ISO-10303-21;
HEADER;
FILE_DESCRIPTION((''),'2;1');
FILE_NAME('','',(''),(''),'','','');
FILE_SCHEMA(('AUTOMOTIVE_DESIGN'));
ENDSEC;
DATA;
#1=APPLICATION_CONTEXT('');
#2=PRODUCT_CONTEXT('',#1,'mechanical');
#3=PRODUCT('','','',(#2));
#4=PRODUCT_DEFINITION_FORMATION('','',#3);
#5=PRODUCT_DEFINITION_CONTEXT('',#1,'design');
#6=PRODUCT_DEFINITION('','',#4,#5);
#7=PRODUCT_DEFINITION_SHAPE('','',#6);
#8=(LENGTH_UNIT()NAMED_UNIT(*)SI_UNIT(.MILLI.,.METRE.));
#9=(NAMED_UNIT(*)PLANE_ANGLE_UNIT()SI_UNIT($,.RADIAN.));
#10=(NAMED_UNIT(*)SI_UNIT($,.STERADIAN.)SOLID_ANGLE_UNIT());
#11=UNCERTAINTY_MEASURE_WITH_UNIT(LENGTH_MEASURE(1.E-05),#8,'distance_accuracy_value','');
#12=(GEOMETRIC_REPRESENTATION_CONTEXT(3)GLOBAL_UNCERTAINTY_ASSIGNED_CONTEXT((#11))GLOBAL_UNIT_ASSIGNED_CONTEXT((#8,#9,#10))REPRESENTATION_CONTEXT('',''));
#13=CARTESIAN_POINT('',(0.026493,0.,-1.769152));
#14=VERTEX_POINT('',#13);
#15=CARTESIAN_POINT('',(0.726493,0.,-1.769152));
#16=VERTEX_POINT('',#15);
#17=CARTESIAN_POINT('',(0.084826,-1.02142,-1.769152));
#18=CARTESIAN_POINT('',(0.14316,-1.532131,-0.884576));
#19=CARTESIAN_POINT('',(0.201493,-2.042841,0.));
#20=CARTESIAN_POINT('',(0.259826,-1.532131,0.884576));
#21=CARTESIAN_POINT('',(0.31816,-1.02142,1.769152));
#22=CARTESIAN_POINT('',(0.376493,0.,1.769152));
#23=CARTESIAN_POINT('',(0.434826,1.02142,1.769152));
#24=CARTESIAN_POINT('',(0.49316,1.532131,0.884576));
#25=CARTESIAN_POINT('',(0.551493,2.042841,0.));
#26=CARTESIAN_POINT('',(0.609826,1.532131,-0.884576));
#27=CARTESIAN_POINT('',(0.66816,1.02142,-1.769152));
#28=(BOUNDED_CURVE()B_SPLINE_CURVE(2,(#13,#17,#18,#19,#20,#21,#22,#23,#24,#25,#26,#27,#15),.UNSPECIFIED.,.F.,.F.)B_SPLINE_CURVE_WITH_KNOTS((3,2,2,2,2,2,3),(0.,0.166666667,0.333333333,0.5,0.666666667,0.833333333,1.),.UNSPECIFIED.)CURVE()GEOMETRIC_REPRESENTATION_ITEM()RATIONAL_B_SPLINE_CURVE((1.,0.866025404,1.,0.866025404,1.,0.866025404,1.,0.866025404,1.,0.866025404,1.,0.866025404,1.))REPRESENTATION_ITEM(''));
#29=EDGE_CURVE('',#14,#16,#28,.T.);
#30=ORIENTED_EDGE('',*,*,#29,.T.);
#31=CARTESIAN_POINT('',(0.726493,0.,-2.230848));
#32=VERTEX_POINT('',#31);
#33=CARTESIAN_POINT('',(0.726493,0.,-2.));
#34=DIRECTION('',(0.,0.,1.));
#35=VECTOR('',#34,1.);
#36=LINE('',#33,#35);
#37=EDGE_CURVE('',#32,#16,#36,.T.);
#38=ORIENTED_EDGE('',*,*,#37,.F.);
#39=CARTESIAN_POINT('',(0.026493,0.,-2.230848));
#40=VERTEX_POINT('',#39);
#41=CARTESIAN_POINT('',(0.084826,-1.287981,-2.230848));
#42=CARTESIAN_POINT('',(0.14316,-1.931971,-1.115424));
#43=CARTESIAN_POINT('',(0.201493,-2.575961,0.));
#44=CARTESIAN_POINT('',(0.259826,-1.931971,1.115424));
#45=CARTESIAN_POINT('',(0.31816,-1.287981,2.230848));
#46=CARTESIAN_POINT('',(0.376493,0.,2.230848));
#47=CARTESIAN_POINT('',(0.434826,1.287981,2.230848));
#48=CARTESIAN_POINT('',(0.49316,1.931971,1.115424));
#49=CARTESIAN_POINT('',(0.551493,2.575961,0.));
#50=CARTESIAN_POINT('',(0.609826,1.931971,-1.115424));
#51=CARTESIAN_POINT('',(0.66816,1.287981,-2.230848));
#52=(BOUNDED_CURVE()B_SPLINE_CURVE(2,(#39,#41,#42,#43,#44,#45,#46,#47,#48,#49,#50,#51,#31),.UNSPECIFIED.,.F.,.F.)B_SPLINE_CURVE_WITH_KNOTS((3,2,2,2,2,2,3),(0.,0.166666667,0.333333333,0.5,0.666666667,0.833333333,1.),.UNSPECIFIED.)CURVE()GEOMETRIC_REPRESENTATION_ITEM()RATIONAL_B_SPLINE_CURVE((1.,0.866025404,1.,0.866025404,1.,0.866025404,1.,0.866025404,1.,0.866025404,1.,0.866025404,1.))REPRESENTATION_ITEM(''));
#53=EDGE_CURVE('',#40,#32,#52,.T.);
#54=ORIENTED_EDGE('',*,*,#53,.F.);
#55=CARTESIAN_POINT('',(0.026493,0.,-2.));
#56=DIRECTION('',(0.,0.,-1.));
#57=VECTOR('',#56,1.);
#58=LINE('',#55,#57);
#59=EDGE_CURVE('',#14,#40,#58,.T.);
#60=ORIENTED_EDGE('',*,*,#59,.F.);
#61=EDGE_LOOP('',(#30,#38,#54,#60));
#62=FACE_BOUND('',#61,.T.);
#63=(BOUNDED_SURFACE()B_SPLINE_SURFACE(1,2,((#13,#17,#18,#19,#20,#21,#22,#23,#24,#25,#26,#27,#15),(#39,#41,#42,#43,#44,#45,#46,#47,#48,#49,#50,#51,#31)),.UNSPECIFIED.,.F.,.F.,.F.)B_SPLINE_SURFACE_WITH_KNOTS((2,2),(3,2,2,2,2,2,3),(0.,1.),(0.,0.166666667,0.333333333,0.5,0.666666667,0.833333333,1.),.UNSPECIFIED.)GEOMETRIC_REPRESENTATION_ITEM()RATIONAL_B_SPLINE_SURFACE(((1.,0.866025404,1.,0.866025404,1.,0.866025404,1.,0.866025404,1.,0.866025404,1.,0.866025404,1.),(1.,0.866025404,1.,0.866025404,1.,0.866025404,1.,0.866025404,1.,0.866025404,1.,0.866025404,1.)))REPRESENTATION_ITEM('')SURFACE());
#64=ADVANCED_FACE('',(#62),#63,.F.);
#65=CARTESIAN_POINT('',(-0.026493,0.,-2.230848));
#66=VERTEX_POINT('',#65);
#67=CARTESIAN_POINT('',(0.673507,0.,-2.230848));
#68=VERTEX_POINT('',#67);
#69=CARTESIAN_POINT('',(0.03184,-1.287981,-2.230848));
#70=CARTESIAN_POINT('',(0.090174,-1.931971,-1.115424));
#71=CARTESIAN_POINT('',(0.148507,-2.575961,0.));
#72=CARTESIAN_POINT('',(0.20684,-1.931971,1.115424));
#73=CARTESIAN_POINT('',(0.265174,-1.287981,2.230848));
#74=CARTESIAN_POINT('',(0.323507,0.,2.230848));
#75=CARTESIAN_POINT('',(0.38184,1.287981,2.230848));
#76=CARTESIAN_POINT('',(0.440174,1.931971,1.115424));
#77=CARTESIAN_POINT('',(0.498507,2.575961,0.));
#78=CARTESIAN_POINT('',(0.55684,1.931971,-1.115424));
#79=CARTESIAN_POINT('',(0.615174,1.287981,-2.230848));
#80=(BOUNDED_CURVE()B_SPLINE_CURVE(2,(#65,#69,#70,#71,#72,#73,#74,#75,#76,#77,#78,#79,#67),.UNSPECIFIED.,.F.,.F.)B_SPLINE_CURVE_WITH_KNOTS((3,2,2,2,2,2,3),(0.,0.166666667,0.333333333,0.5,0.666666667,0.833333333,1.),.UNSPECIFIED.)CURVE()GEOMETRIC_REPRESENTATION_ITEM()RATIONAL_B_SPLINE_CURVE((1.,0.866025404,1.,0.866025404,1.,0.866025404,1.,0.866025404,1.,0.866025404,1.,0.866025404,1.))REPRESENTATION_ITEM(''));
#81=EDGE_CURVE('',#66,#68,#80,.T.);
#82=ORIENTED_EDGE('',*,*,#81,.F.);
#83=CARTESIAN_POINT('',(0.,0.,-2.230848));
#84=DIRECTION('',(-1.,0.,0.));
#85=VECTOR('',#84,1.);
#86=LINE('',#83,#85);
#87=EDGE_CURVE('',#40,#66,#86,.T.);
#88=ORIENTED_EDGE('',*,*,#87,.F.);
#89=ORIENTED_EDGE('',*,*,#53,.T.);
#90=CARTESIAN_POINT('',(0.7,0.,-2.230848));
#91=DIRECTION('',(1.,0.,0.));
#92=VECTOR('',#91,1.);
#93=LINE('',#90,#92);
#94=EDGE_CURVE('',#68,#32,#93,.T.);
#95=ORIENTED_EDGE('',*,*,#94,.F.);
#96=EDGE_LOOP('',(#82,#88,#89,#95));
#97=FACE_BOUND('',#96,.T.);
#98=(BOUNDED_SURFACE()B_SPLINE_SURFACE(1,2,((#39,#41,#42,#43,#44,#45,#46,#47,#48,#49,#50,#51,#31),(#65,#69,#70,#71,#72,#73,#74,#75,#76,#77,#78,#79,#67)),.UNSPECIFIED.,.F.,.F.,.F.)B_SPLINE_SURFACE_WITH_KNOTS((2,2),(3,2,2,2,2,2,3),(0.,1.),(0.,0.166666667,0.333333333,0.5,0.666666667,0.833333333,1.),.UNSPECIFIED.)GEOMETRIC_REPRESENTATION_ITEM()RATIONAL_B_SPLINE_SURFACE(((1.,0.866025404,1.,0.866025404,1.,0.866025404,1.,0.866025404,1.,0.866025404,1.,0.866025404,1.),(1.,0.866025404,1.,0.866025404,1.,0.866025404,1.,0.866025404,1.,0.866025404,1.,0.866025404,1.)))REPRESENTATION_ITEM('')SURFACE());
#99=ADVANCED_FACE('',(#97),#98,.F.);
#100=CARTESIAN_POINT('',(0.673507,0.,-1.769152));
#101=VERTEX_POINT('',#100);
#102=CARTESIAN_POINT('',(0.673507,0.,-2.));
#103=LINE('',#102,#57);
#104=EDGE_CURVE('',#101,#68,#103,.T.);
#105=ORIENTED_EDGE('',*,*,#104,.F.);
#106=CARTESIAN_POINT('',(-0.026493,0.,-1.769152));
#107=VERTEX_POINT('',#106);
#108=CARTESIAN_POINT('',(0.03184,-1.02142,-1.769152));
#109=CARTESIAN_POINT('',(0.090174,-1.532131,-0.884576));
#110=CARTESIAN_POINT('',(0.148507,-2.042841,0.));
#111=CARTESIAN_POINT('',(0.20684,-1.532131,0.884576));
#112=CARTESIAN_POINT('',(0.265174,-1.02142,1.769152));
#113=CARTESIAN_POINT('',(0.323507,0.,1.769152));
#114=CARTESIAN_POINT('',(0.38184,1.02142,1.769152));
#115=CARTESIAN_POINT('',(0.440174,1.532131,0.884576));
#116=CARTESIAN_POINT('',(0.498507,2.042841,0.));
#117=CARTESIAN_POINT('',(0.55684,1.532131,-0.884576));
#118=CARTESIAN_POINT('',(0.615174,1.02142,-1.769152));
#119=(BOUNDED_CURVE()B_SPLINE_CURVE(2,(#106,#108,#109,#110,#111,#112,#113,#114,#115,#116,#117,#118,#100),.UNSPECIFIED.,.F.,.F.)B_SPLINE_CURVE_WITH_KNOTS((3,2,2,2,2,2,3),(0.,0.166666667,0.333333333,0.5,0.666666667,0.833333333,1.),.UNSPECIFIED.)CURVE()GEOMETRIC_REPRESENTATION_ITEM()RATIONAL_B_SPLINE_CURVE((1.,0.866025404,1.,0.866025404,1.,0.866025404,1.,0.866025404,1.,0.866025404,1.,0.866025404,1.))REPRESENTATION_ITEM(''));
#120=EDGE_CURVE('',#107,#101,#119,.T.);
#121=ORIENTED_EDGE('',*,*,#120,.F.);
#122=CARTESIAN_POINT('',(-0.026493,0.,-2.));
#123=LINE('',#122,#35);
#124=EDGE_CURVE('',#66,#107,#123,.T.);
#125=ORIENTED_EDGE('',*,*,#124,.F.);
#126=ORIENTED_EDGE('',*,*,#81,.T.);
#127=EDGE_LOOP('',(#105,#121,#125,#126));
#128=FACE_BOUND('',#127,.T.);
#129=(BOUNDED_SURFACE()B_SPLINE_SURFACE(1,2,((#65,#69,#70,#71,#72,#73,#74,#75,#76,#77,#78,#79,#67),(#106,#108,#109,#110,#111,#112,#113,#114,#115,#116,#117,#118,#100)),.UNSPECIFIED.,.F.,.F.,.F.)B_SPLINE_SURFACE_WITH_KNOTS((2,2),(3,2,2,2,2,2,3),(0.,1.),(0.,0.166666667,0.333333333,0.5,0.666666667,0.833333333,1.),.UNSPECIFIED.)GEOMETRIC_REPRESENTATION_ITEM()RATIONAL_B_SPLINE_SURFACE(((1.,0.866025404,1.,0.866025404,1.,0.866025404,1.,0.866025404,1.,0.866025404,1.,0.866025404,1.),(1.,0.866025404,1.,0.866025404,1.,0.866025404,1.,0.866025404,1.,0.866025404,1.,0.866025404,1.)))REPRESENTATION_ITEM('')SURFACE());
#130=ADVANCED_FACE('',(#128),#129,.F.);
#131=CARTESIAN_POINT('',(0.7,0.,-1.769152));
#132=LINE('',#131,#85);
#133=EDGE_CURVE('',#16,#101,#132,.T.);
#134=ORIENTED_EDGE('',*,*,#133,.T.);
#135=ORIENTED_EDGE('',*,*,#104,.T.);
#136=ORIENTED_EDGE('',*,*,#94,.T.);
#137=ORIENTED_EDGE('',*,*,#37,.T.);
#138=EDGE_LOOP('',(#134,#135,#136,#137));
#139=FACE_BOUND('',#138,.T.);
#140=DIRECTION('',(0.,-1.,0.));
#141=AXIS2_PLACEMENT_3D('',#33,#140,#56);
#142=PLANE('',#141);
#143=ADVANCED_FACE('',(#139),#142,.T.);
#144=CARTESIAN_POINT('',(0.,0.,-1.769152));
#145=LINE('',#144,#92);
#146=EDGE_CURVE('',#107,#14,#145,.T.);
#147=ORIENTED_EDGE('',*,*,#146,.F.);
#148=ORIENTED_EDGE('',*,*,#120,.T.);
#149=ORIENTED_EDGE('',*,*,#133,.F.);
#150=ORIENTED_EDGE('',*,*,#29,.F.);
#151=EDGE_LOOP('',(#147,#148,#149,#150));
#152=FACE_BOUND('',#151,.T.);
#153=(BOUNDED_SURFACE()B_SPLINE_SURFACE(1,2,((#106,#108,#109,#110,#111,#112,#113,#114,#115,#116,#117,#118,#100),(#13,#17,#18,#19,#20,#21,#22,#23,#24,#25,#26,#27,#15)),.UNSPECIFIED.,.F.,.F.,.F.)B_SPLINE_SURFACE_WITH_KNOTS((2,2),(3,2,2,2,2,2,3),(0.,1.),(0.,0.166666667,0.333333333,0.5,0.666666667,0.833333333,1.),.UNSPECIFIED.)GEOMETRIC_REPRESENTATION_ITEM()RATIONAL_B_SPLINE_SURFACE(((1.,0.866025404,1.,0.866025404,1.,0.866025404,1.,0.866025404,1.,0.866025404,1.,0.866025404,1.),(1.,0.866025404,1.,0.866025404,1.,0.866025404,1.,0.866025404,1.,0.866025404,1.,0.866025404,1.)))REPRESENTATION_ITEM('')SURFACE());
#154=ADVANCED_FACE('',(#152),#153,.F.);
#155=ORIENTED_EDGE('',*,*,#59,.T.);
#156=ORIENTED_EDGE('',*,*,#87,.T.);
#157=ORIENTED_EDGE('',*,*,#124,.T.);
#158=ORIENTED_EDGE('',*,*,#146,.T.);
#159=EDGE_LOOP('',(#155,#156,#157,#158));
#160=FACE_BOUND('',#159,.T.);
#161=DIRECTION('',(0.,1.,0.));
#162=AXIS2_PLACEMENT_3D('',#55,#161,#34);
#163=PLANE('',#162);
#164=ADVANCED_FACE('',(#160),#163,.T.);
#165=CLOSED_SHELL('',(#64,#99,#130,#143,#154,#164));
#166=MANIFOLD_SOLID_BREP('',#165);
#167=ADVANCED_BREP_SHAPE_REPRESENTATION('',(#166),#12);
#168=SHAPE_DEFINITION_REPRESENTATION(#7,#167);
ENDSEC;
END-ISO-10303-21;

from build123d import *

# Parameters (mm, degrees)
SWEEP1_PITCH = 0.7


with BuildPart() as part:
    # Sweep1: the profile of Sketch4 screwed along a left-hand helix of 1 turns, 6 arcs to a turn; built about Z, then put on its axis
    sweep1_z = Axis((0, 0, 0), (0, 0, 1))
    sweep1_corners = [(1.769151995, 0, 0.026493031), (1.769151995, 0, -0.026493031), (2.230848005, 0, -0.026493031), (2.230848005, 0, 0.026493031)]
    with BuildLine(mode=Mode.PRIVATE) as sweep1_profile:
        Line(sweep1_corners[0], sweep1_corners[1])
        Line(sweep1_corners[1], sweep1_corners[2])
        Line(sweep1_corners[2], sweep1_corners[3])
        Line(sweep1_corners[3], sweep1_corners[0])
    sweep1_cap = Face(sweep1_profile.wire())
    sweep1_turn_angles = [0, -30, -60, -90, -120, -150, -180, -210, -240, -270, -300, -330, -360]
    sweep1_turn_weights = [1, 0.8660254037844387, 1, 0.8660254037844387, 1, 0.8660254037844387, 1, 0.8660254037844387, 1, 0.8660254037844387, 1, 0.8660254037844387, 1]
    sweep1_turn_rails = [Edge.make_bspline([Vector(p[0], p[1], 0).rotate(sweep1_z, sweep1_turn_angles[k]) / sweep1_turn_weights[k] + Vector(0, 0, p[2] + -SWEEP1_PITCH * sweep1_turn_angles[k] / 360) for k in range(13)], [0, 0, 0, 1, 1, 2, 2, 3, 3, 4, 4, 5, 5, 6, 6, 6], 2, sweep1_turn_weights) for p in sweep1_corners]
    sweep1_turn_sides = [Face.make_surface_from_curves(sweep1_turn_rails[p[0]], sweep1_turn_rails[p[1]]) for p in [(0, 1), (1, 2), (2, 3), (3, 0)]]
    sweep1 = Plane(origin=(0, 0, 0), x_dir=(0, 0, -1), z_dir=(1, 0, 0)) * Solid(Shell([*sweep1_turn_sides, sweep1_cap, sweep1_cap.rotate(sweep1_z, -360).moved(Location((0, 0, -SWEEP1_PITCH * -360 / 360)))]))
    add(sweep1)


solid = part.part
